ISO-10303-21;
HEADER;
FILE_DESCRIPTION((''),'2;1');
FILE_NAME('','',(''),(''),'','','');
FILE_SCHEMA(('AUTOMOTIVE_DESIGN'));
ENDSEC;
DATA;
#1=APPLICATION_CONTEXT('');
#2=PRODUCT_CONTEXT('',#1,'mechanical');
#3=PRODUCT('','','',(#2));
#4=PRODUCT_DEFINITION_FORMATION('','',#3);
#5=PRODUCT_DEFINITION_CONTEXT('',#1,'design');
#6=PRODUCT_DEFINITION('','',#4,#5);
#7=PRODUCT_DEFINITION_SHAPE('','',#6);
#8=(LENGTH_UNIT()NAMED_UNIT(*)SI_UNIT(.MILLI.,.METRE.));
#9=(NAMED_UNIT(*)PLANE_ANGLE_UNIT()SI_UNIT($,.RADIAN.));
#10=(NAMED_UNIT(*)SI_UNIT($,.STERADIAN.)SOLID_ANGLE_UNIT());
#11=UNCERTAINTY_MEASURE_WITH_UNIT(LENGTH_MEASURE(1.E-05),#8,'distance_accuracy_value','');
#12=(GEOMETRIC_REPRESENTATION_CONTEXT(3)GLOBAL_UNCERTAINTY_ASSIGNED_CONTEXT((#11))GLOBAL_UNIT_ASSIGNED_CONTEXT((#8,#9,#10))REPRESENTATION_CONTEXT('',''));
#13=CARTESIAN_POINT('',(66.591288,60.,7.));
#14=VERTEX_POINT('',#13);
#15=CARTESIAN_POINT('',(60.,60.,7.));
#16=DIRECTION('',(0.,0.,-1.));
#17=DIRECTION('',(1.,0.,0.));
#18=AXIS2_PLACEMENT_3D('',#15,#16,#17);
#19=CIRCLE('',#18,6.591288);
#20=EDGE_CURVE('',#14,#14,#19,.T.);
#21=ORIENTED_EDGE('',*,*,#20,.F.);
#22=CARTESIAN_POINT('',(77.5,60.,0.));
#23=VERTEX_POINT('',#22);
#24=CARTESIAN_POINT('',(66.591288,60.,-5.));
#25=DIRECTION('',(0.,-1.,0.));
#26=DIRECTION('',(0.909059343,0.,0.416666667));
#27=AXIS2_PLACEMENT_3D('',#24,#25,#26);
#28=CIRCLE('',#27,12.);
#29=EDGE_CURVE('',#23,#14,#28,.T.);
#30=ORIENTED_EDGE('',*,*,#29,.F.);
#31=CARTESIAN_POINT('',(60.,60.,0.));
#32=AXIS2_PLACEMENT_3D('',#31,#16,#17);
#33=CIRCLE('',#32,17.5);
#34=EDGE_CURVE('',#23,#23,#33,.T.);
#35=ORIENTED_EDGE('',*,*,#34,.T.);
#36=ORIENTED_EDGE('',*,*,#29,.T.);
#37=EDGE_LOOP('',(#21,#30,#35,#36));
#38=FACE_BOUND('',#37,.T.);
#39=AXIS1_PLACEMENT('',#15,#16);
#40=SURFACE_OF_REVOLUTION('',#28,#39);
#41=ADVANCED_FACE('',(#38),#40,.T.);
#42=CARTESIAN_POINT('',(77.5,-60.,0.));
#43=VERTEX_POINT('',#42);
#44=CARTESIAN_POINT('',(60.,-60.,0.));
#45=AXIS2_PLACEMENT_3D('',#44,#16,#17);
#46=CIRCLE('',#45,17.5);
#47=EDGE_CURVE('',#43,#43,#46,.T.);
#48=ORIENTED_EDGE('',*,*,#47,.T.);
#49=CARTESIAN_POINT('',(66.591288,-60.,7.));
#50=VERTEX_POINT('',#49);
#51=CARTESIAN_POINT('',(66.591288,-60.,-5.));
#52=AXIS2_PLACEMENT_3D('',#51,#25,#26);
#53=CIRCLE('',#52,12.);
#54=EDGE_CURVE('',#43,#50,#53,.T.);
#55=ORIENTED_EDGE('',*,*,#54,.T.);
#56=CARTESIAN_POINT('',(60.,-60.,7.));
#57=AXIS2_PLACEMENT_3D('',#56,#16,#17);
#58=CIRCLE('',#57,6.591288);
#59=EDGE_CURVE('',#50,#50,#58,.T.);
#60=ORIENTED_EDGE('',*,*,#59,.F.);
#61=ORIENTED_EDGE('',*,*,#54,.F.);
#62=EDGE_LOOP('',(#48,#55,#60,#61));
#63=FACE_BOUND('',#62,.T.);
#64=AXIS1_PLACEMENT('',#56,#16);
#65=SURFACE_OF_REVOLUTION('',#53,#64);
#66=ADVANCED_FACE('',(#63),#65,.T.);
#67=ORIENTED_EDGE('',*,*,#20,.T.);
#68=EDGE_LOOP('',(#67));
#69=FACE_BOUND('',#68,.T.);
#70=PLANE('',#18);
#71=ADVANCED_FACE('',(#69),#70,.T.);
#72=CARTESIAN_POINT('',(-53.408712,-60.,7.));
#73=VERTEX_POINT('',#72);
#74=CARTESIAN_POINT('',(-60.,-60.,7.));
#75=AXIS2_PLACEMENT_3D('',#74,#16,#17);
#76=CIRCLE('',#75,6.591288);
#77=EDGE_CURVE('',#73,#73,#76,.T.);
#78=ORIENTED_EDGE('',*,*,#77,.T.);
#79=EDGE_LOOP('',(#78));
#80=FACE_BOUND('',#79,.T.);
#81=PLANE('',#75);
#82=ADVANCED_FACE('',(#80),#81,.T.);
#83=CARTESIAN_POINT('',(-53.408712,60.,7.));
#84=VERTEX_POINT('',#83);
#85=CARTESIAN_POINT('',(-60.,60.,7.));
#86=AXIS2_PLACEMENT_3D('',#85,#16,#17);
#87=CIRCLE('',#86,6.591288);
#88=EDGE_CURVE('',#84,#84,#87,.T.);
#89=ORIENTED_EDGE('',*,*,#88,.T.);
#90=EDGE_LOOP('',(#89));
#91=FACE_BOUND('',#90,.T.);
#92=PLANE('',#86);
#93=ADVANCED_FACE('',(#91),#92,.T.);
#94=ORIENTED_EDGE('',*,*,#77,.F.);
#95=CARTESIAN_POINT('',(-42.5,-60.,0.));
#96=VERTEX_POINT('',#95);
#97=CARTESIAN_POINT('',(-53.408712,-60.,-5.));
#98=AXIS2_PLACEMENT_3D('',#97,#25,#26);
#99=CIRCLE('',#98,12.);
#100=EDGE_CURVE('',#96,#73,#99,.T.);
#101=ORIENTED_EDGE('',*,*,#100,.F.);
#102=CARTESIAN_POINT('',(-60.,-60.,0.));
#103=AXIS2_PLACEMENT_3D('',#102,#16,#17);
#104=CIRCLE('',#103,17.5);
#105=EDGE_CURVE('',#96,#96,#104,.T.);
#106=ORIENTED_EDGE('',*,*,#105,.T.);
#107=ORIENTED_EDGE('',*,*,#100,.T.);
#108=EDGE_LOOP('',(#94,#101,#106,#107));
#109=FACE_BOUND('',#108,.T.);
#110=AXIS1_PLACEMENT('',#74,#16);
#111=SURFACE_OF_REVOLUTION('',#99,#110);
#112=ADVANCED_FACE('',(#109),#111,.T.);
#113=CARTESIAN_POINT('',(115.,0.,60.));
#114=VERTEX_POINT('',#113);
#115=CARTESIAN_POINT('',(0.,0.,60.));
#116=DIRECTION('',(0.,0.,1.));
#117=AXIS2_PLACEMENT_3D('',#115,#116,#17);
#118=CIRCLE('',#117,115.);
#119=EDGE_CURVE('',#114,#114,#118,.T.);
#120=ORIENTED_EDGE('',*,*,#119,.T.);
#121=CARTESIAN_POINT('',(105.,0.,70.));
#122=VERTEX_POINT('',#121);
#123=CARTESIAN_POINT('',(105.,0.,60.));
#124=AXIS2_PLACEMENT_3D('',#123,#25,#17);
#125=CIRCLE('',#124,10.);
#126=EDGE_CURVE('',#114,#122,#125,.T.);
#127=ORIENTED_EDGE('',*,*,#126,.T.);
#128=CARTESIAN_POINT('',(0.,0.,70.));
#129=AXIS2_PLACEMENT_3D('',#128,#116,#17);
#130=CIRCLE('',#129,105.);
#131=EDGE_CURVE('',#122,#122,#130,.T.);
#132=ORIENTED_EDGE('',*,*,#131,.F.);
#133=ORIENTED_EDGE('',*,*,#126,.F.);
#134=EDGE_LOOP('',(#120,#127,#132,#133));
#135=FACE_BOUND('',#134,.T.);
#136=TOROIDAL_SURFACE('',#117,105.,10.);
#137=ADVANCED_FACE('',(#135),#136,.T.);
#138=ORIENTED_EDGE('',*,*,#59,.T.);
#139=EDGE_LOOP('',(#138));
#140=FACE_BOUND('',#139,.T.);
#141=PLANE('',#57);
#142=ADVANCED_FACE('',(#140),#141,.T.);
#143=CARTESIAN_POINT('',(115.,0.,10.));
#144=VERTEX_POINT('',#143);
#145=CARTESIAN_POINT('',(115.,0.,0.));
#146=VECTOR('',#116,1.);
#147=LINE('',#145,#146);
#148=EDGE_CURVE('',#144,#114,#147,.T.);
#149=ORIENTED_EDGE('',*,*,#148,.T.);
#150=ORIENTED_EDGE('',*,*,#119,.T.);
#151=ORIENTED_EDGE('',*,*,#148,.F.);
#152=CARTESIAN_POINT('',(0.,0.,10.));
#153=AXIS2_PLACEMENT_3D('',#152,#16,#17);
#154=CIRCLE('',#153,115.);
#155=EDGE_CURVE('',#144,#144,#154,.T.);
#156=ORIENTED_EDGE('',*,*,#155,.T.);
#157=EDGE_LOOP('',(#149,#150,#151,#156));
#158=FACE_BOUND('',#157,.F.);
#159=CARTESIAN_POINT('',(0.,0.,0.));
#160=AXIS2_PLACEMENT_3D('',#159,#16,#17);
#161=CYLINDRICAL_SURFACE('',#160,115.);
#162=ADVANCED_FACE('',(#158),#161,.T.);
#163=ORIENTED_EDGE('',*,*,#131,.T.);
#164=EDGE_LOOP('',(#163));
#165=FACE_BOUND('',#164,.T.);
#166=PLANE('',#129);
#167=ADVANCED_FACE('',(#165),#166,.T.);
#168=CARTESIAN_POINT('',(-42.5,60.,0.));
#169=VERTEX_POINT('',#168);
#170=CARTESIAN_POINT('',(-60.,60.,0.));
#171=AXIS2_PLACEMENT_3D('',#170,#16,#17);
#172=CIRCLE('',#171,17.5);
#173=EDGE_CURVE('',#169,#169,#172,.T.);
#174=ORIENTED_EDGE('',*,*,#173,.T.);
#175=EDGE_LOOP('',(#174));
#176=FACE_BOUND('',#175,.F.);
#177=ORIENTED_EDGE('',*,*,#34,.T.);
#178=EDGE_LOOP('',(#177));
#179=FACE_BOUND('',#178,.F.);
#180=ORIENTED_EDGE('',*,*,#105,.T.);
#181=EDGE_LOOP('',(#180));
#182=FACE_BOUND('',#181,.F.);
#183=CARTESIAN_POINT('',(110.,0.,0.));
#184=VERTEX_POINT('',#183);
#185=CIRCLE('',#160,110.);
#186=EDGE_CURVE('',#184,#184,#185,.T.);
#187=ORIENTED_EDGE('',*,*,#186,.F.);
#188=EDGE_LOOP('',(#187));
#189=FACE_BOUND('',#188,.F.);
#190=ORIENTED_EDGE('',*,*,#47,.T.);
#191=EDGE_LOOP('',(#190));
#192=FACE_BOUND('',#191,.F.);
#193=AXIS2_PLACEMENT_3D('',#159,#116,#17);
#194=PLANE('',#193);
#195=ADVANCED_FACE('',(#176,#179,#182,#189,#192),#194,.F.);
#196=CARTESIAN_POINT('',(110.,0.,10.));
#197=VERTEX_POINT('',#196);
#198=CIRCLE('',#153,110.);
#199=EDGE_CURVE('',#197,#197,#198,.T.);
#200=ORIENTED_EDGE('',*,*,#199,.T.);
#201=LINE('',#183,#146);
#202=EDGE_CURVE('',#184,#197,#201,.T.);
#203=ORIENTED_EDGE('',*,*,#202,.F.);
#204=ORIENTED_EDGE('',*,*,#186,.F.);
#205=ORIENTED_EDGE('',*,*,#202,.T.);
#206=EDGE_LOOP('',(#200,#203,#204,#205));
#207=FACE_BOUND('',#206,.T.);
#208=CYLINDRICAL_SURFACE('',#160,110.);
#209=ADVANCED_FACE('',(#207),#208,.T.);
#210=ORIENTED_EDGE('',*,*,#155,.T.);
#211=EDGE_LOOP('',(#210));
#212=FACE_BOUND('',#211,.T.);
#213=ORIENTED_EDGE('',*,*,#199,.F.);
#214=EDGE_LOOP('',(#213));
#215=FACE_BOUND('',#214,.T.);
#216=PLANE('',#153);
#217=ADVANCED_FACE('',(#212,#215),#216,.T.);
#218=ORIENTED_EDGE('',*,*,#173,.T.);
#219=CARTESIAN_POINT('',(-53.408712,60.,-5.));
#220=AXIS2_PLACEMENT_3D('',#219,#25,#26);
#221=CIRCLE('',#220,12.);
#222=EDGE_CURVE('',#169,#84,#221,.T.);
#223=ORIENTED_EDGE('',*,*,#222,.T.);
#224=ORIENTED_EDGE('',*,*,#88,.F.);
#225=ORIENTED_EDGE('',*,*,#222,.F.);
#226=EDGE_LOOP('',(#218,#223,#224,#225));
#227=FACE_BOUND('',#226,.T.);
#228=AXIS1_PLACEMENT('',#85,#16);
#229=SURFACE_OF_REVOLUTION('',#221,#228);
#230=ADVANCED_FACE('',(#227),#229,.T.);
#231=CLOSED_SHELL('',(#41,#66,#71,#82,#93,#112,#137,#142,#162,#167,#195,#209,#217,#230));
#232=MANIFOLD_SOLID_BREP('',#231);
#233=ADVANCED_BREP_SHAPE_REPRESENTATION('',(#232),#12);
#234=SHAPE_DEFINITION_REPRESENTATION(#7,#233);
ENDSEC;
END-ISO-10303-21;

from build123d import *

# Parameters (mm, degrees)
F0_R     = 115
F1_DEPTH = 70
F2_R     = 17.5
F3_DEPTH = 7
F5_R     = 10
F6_R     = 115
F6_R_2   = 110
F7_DEPTH = 10


# Not quite as in the source:
# - a fillet or chamfer that OpenCascade refuses, or shapes differently, is made with other operations: its cross-section is extruded or revolved along the edge and cut away or added


with BuildPart() as f1:
    # F0 (on Top) → F1 (new body)
    with BuildSketch(Plane.XY):
        Circle(F0_R)
    extrude(amount=F1_DEPTH)

    # F2 (on face) → F3 (cut)
    with BuildSketch(Plane(origin=(0, 0, 0), x_dir=(1, 0, 0), z_dir=(0, 0, -1))):
        with Locations((-60, 60)):
            Circle(F2_R)
        with Locations((-60, -60)):
            Circle(F2_R)
        with Locations((60, -60)):
            Circle(F2_R)
        with Locations((60, 60)):
            Circle(F2_R)
    extrude(amount=-F3_DEPTH, mode=Mode.SUBTRACT)

    # F4: fillet of radius 12 on 4 edges, made by hand

    # F4_s1 → F4_t2 (revolve)
    with BuildSketch(Plane.XZ.offset(60)):
        with BuildLine():
            ThreePointArc((-42.5, 0), (-46.9279714162, 5.0995049384), (-53.4087121146, 7))
            Line((-53.4087121146, 7), (-42.5, 7))
            Line((-42.5, 7), (-42.5, 0))
        make_face()
    revolve(axis=Axis((-60, -60, 7), (0, 0, -1)))

    # F4_s3 → F4_t4 (revolve)
    with BuildSketch(Plane.XZ.offset(-60)):
        with BuildLine():
            ThreePointArc((-42.5, 0), (-46.9279714162, 5.0995049384), (-53.4087121146, 7))
            Line((-53.4087121146, 7), (-42.5, 7))
            Line((-42.5, 7), (-42.5, 0))
        make_face()
    revolve(axis=Axis((-60, 60, 7), (0, 0, -1)))

    # F4_s5 → F4_t6 (revolve)
    with BuildSketch(Plane.XZ.offset(-60)):
        with BuildLine():
            ThreePointArc((77.5, 0), (73.0720285838, 5.0995049384), (66.5912878854, 7))
            Line((66.5912878854, 7), (77.5, 7))
            Line((77.5, 7), (77.5, 0))
        make_face()
    revolve(axis=Axis((60, 60, 7), (0, 0, -1)))

    # F4_s7 → F4_t8 (revolve)
    with BuildSketch(Plane.XZ.offset(60)):
        with BuildLine():
            ThreePointArc((77.5, 0), (73.0720285838, 5.0995049384), (66.5912878854, 7))
            Line((66.5912878854, 7), (77.5, 7))
            Line((77.5, 7), (77.5, 0))
        make_face()
    revolve(axis=Axis((60, -60, 7), (0, 0, -1)))

    # F5
    f5_edges = [f1.edges().sort_by_distance(p)[0] for p in [
        (-115, 0, 70),
    ]]
    fillet(f5_edges, radius=F5_R)

    # F6 (on face) → F7 (cut)
    with BuildSketch(Plane(origin=(0, 0, 0), x_dir=(1, 0, 0), z_dir=(0, 0, -1))):
        Circle(F6_R)
        Circle(F6_R_2, mode=Mode.SUBTRACT)
    extrude(amount=-F7_DEPTH, mode=Mode.SUBTRACT)


solid = f1.part
